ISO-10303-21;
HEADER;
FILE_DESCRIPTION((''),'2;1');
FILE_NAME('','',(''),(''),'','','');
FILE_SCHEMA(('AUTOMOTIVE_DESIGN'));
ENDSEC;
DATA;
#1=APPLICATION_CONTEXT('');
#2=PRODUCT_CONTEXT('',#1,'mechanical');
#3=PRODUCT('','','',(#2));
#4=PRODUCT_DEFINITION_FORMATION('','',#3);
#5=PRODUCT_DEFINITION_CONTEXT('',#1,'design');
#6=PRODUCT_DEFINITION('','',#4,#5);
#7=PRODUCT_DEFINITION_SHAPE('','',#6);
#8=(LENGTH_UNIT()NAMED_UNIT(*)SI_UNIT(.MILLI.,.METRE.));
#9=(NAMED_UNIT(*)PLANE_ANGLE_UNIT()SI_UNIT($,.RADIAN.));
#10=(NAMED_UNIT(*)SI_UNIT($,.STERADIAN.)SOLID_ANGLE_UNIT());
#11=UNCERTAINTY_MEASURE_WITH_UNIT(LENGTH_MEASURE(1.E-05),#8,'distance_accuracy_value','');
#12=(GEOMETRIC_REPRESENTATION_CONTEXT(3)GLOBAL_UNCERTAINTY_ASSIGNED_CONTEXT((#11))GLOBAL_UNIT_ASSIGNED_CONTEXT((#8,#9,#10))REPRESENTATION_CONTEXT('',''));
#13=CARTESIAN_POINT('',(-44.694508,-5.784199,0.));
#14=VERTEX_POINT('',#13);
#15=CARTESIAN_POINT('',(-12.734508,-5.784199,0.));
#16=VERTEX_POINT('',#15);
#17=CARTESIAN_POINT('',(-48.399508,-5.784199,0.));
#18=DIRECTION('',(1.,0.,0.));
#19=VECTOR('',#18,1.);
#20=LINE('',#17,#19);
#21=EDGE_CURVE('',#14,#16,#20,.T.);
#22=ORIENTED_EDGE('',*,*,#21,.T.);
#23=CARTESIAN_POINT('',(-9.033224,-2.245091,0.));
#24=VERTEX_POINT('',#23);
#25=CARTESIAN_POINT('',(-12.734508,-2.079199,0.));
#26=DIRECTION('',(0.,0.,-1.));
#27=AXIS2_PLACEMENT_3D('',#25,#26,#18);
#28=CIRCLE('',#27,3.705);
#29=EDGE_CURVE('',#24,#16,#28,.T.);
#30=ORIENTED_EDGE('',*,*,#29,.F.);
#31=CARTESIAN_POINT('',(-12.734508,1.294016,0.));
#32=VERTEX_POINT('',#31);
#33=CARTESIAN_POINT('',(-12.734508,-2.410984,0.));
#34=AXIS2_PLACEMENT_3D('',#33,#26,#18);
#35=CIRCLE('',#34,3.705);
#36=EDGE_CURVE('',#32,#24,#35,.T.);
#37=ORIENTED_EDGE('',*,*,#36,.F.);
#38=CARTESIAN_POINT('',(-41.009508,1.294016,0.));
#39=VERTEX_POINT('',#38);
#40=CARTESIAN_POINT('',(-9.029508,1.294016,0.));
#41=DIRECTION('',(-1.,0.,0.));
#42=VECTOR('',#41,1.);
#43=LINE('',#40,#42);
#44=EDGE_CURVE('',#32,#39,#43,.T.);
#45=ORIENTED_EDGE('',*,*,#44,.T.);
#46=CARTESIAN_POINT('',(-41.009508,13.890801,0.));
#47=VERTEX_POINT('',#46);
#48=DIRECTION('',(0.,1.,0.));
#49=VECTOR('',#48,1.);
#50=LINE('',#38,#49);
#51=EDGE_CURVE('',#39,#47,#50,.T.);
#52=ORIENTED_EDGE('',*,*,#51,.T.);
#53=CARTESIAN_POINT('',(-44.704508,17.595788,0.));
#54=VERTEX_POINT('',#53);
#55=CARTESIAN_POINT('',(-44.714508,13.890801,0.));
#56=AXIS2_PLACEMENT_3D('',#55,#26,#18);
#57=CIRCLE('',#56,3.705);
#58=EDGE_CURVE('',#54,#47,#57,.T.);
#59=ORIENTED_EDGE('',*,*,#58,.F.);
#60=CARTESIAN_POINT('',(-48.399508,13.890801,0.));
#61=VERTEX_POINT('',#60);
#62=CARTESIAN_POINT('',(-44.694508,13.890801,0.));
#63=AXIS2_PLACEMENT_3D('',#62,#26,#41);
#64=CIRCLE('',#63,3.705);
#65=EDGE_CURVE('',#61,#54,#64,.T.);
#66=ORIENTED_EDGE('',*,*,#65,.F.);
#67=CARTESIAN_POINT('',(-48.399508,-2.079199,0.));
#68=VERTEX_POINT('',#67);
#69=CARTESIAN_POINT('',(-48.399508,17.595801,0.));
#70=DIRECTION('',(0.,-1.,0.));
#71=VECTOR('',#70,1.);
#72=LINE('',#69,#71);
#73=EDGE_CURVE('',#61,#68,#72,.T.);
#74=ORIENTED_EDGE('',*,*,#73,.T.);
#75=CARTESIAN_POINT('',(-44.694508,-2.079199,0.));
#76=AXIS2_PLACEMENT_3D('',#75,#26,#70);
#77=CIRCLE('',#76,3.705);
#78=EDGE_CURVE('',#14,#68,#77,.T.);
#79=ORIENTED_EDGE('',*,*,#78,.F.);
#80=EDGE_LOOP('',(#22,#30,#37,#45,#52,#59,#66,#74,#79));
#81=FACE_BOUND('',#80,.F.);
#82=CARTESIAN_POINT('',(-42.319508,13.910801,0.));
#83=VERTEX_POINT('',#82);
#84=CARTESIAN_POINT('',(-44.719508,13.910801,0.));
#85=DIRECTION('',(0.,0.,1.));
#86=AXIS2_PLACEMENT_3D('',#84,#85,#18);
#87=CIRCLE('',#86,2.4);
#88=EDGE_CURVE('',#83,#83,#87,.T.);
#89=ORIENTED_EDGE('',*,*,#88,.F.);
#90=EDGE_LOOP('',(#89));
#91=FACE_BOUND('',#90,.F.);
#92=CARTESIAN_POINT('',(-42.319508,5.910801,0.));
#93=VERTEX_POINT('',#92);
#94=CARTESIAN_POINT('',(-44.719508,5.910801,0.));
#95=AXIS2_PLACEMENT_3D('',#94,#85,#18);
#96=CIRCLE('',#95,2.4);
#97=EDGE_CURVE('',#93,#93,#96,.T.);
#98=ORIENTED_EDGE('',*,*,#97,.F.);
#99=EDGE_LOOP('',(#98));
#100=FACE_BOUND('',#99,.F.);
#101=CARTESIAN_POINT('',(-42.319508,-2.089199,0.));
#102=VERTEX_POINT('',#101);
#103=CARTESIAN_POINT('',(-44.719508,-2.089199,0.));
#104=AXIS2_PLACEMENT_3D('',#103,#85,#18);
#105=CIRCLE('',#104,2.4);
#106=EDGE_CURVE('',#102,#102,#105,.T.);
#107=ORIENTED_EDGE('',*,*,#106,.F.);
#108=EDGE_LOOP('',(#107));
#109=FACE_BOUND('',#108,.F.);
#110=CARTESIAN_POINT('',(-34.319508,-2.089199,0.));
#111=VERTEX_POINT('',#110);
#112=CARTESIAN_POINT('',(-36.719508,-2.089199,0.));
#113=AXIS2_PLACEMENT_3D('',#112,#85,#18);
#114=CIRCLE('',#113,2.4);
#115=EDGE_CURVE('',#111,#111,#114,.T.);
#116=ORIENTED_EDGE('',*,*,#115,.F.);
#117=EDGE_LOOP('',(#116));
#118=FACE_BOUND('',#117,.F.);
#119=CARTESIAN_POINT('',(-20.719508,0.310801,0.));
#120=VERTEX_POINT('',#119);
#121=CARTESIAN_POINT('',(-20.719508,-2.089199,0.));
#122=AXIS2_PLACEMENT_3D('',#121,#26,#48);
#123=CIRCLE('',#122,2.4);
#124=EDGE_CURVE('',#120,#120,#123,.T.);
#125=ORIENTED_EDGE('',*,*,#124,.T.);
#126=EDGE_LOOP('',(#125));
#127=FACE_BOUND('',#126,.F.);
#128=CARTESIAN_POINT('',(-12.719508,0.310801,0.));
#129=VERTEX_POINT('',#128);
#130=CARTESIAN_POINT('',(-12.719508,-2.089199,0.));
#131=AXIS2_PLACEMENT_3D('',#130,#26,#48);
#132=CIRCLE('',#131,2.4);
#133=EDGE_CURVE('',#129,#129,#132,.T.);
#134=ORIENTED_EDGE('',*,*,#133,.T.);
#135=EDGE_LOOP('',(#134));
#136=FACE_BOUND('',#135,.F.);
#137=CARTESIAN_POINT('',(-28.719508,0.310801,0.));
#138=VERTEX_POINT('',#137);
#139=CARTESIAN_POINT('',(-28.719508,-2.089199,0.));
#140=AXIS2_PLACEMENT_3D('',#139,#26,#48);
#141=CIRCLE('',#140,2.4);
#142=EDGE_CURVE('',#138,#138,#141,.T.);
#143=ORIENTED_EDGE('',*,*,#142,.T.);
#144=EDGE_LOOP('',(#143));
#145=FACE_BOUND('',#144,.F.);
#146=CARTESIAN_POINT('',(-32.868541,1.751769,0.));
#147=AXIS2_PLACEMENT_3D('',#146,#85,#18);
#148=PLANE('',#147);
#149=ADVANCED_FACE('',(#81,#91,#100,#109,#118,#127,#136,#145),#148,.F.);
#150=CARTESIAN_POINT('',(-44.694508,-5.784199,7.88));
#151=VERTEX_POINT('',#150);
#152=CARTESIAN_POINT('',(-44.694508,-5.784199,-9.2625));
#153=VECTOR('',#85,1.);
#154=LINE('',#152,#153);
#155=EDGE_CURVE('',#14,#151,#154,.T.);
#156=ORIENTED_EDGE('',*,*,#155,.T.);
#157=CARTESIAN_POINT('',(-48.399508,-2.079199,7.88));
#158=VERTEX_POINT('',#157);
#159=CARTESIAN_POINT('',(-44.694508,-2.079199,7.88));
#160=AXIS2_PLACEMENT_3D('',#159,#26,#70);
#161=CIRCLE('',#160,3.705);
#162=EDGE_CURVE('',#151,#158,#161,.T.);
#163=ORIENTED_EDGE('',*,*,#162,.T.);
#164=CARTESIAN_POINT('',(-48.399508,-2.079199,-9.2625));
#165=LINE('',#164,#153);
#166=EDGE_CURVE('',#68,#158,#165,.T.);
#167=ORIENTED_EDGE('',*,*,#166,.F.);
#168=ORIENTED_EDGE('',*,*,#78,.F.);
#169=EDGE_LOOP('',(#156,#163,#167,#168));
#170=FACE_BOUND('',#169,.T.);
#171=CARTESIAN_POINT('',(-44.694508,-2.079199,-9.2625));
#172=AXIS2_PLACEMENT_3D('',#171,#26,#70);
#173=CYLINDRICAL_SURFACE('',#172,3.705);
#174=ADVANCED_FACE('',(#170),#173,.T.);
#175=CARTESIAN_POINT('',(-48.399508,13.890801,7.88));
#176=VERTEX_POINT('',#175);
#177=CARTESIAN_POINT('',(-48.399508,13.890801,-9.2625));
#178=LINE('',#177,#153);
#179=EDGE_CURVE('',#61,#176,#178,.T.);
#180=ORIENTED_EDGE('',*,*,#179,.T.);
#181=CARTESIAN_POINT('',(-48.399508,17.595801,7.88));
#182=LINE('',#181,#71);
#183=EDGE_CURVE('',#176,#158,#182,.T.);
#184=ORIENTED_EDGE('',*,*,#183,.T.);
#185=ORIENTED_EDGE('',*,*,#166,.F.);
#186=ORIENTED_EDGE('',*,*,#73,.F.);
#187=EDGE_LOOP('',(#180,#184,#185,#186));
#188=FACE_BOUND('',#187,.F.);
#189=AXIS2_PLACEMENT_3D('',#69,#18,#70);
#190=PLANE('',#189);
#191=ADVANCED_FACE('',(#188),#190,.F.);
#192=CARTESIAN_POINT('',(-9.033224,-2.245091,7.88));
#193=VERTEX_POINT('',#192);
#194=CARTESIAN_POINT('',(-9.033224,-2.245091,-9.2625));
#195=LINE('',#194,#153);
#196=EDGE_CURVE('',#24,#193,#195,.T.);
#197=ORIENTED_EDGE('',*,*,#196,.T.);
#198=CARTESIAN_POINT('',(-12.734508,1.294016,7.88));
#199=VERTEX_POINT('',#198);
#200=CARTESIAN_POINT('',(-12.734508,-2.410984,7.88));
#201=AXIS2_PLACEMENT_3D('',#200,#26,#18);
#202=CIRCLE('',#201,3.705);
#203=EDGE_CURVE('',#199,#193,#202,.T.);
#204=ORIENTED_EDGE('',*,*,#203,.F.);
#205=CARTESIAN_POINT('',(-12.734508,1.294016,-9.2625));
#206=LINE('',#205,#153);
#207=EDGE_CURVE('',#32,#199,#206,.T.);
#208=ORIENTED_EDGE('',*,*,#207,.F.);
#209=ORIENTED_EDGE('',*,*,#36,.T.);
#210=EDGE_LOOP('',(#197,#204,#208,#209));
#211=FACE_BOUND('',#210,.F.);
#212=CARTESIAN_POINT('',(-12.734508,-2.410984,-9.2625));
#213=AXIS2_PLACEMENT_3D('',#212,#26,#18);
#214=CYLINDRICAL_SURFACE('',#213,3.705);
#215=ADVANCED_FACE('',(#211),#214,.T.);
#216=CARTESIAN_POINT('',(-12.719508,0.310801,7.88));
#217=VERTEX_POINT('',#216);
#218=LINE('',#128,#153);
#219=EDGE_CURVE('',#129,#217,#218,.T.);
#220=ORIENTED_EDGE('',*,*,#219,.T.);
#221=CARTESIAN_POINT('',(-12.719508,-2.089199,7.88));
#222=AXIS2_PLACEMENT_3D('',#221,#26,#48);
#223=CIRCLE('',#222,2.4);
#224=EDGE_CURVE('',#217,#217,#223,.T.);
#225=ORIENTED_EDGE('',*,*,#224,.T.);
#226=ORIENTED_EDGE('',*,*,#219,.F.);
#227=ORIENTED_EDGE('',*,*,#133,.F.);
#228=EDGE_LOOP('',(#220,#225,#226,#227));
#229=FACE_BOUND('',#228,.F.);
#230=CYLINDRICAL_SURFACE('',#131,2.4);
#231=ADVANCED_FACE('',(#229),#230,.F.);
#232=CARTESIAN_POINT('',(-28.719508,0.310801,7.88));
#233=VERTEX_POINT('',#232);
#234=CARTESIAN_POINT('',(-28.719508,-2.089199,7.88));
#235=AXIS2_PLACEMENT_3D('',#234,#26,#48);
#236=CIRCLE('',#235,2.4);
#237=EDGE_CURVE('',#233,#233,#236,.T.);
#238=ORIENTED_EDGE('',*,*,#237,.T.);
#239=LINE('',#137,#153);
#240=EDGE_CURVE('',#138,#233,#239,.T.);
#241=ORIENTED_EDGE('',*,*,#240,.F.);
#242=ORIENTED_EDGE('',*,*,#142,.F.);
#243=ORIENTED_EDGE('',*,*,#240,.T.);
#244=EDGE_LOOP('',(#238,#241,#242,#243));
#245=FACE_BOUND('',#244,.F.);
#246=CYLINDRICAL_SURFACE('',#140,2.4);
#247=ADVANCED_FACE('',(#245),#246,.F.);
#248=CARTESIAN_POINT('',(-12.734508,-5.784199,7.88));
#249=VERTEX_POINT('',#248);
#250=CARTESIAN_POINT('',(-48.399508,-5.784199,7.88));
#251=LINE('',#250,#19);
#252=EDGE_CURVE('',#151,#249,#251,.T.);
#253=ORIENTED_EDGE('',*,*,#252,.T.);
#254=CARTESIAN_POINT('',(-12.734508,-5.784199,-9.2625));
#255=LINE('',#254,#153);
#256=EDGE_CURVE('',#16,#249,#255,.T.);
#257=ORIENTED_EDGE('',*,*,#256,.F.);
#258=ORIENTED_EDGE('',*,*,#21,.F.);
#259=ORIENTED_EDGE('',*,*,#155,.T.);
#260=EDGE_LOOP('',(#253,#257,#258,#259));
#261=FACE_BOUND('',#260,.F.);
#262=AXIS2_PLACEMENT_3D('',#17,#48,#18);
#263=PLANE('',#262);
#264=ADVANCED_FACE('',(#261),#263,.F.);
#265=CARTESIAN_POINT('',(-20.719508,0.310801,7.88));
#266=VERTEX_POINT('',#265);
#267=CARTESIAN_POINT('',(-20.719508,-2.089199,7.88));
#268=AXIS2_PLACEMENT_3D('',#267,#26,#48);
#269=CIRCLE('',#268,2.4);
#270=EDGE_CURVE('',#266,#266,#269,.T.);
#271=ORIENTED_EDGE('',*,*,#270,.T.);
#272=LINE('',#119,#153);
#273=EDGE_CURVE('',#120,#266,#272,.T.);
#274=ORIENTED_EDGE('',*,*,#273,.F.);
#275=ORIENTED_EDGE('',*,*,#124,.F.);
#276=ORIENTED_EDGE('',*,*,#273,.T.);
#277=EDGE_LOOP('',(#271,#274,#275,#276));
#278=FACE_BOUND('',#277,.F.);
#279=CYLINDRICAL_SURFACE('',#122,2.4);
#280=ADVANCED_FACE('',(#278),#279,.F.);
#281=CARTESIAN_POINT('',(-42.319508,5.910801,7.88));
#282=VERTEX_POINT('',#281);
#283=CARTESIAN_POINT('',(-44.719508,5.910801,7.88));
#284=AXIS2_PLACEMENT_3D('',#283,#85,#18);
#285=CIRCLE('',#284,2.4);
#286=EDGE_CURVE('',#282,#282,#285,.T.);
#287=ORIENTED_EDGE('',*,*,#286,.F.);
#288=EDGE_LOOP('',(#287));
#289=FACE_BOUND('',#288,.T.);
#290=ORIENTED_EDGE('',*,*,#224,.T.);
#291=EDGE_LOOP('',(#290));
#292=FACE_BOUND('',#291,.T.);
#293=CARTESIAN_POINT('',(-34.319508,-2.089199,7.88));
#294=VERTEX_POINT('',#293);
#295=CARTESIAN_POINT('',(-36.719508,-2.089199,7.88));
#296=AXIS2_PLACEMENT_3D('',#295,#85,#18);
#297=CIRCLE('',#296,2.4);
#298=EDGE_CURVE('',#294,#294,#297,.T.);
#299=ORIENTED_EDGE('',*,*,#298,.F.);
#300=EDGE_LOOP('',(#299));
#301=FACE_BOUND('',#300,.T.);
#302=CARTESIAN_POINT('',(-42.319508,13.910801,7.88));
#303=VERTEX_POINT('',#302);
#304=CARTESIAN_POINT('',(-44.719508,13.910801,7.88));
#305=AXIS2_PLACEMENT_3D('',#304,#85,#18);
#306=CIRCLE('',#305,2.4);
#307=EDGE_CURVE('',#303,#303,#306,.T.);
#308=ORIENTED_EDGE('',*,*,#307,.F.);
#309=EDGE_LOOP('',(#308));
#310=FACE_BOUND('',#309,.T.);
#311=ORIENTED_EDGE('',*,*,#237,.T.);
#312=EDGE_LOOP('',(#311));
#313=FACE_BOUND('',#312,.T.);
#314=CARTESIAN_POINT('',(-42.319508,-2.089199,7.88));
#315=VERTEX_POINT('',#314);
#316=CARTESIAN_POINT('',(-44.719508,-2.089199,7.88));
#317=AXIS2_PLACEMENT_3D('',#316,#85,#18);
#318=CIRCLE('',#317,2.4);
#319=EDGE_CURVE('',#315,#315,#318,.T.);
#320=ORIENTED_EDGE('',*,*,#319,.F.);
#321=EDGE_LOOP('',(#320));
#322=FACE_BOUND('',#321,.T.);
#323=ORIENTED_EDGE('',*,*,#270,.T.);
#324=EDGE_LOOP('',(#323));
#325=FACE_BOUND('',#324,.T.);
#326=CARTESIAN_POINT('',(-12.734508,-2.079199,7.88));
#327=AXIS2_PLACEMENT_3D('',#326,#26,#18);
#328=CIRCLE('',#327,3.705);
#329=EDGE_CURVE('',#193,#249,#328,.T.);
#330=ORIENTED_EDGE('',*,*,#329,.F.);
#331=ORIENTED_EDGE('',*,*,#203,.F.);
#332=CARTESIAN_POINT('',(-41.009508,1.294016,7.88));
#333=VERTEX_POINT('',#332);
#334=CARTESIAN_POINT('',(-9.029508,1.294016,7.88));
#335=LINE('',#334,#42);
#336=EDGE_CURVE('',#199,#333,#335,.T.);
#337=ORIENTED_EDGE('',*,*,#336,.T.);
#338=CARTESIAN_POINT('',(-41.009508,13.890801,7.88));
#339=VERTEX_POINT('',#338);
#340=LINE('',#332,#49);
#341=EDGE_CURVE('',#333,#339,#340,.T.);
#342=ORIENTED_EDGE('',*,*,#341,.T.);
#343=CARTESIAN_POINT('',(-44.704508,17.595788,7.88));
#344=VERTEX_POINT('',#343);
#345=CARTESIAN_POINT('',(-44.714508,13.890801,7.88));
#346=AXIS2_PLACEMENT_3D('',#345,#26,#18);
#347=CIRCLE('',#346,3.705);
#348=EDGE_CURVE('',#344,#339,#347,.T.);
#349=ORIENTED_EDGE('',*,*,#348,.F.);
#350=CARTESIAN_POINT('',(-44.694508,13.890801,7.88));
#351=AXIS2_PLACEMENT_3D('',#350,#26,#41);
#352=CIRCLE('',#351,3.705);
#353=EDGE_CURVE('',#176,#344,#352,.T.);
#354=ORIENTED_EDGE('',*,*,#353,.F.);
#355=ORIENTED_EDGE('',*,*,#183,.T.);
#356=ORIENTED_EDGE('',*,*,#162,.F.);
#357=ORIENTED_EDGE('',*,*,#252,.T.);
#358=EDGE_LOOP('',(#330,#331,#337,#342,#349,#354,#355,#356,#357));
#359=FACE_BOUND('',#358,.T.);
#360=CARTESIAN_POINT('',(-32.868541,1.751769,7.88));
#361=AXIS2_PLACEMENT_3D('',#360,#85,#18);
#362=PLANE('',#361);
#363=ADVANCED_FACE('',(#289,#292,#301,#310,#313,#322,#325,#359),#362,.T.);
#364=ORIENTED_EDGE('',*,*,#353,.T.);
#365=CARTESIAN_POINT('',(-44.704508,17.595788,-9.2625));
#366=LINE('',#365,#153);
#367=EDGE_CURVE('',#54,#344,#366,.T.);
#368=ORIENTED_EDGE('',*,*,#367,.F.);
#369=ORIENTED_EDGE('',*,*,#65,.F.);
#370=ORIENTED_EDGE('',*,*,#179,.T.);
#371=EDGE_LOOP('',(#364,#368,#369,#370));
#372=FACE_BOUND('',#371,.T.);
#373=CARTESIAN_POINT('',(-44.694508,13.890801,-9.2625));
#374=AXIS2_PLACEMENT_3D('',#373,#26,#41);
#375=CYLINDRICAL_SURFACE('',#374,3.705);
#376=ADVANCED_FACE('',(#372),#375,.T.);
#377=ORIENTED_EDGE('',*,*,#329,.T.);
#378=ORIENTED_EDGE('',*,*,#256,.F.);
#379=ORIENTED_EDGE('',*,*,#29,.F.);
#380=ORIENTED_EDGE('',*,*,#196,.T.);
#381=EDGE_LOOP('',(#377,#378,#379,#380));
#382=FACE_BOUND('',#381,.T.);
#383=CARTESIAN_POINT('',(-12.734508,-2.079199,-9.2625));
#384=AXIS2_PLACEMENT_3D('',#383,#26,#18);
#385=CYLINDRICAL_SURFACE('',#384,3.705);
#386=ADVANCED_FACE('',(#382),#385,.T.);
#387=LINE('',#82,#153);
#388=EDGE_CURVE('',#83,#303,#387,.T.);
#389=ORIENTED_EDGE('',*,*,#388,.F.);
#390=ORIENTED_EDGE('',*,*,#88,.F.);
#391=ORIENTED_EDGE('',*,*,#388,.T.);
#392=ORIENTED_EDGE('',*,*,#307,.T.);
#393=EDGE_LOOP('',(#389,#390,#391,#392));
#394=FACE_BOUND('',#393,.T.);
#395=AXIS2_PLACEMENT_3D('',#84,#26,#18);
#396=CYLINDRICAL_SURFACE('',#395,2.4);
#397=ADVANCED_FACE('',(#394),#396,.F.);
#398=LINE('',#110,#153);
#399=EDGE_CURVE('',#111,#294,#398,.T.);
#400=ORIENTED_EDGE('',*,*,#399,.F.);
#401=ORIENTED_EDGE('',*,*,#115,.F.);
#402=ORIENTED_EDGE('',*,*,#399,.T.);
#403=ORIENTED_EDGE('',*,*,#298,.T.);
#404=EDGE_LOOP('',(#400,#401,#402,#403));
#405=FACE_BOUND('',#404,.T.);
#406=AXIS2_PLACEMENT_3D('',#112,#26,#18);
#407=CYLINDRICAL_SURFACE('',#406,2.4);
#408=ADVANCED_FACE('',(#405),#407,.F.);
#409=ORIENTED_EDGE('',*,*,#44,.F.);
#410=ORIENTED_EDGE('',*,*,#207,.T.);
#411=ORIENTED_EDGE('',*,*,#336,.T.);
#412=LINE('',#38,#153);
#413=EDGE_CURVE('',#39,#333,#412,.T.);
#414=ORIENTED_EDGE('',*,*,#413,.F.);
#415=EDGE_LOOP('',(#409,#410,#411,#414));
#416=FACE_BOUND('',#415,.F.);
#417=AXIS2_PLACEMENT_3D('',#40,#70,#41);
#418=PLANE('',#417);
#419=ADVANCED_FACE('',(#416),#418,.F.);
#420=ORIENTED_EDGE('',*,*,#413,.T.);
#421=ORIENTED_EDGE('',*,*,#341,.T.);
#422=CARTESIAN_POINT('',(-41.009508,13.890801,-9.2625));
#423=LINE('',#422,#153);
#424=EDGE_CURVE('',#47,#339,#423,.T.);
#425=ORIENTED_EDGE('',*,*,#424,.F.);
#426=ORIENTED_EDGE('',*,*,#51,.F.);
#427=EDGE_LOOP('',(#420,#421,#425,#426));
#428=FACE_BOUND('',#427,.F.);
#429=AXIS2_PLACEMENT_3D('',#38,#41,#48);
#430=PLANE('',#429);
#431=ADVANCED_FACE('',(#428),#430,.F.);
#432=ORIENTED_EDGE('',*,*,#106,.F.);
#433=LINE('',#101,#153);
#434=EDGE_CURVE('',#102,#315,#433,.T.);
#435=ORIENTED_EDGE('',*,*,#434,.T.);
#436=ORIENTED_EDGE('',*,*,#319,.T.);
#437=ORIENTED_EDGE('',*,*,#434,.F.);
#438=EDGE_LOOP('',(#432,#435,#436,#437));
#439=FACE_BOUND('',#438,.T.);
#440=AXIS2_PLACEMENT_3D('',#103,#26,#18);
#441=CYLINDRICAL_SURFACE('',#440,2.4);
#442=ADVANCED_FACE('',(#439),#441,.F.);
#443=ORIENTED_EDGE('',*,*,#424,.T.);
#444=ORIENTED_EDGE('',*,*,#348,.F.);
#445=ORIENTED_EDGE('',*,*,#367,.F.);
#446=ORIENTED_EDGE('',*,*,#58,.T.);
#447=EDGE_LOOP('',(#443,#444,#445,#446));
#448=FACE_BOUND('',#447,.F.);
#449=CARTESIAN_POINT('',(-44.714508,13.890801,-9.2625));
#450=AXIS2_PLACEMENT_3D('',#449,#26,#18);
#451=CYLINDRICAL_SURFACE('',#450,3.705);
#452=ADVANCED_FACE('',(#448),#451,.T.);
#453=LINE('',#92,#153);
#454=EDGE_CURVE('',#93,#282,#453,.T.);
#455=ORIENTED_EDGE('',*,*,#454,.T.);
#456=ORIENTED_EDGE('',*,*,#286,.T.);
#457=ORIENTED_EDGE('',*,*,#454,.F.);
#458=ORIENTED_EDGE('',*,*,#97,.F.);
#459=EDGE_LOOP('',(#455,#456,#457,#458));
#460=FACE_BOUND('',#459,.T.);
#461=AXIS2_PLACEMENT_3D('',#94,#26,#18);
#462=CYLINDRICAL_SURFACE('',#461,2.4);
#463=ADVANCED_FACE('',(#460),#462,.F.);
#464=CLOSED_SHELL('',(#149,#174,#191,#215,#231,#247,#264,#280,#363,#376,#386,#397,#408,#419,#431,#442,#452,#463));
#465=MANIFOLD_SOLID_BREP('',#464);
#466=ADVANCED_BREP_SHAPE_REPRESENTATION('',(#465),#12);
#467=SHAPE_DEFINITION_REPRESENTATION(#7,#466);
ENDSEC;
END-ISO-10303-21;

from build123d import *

# Parameters (mm, degrees)
F0_R        = 2.4
F1_DEPTH    = 7.88
F2_T1_DEPTH = 26.405


# Not quite as in the source:
# - a fillet or chamfer that OpenCascade refuses, or shapes differently, is made with other operations: its cross-section is extruded or revolved along the edge and cut away or added


with BuildPart() as f1:
    # F0 (on Top) → F1 (new body)
    with BuildSketch(Plane.XY):
        Polygon((-48.3995083171, -5.7841986276), (-31.3221290569, -5.7841986276), (-9.0295083171, -5.7841986276), (-9.0295083171, 1.2940158032), (-41.0095083171, 1.2940158032), (-41.0095083171, 17.5958013724), (-48.3995083171, 17.5958013724), align=None)
        with Locations((-44.7195083171, -2.0891986276)):
            Circle(F0_R, mode=Mode.SUBTRACT)
        with Locations((-36.7195083171, -2.0891986276)):
            Circle(F0_R, mode=Mode.SUBTRACT)
        with BuildLine():
            ThreePointArc((-28.7195083171, -4.4891986276), (-31.1195083171, -2.0891986276), (-28.7195083171, 0.3108013724))
            ThreePointArc((-28.7195083171, 0.3108013724), (-26.3195083171, -2.0891986276), (-28.7195083171, -4.4891986276))
        make_face(mode=Mode.SUBTRACT)
        with BuildLine():
            ThreePointArc((-20.7195083171, -4.4891986276), (-23.1195083171, -2.0891986276), (-20.7195083171, 0.3108013724))
            ThreePointArc((-20.7195083171, 0.3108013724), (-18.3195083171, -2.0891986276), (-20.7195083171, -4.4891986276))
        make_face(mode=Mode.SUBTRACT)
        with BuildLine():
            ThreePointArc((-12.7195083171, -4.4891986276), (-15.1195083171, -2.0891986276), (-12.7195083171, 0.3108013724))
            ThreePointArc((-12.7195083171, 0.3108013724), (-10.3195083171, -2.0891986276), (-12.7195083171, -4.4891986276))
        make_face(mode=Mode.SUBTRACT)
        with Locations((-44.7195083171, 5.9108013724)):
            Circle(F0_R, mode=Mode.SUBTRACT)
        with Locations((-44.7195083171, 13.9108013724)):
            Circle(F0_R, mode=Mode.SUBTRACT)
    extrude(amount=F1_DEPTH)

    # F2: fillet of radius 3.705 on 5 edges, made by hand

    # F2_s2 → F2_t1 (cut)
    with BuildSketch(Plane.XY.offset(-9.2625)):
        with BuildLine():
            ThreePointArc((-48.3995083171, 13.8908013724), (-47.3143389413, 16.5106319967), (-44.6945083171, 17.5958013724))
            Line((-44.6945083171, 17.5958013724), (-48.3995083171, 17.5958013724))
            Line((-48.3995083171, 17.5958013724), (-48.3995083171, 13.8908013724))
        make_face()
        with BuildLine():
            ThreePointArc((-41.0095083171, 13.8908013724), (-42.0946776928, 16.5106319967), (-44.7145083171, 17.5958013724))
            Line((-44.7145083171, 17.5958013724), (-41.0095083171, 17.5958013724))
            Line((-41.0095083171, 17.5958013724), (-41.0095083171, 13.8908013724))
        make_face()
        with BuildLine():
            ThreePointArc((-9.0295083171, -2.4109841968), (-10.1146776928, 0.2088464274), (-12.7345083171, 1.2940158032))
            Line((-12.7345083171, 1.2940158032), (-9.0295083171, 1.2940158032))
            Line((-9.0295083171, 1.2940158032), (-9.0295083171, -2.4109841968))
        make_face()
        with BuildLine():
            ThreePointArc((-9.0295083171, -2.0791986276), (-10.1146776928, -4.6990292519), (-12.7345083171, -5.7841986276))
            Line((-12.7345083171, -5.7841986276), (-9.0295083171, -5.7841986276))
            Line((-9.0295083171, -5.7841986276), (-9.0295083171, -2.0791986276))
        make_face()
        with BuildLine():
            ThreePointArc((-44.6945083171, -5.7841986276), (-47.3143389413, -4.6990292519), (-48.3995083171, -2.0791986276))
            Line((-48.3995083171, -2.0791986276), (-48.3995083171, -5.7841986276))
            Line((-48.3995083171, -5.7841986276), (-44.6945083171, -5.7841986276))
        make_face()
    extrude(amount=F2_T1_DEPTH, mode=Mode.SUBTRACT)


solid = f1.part
